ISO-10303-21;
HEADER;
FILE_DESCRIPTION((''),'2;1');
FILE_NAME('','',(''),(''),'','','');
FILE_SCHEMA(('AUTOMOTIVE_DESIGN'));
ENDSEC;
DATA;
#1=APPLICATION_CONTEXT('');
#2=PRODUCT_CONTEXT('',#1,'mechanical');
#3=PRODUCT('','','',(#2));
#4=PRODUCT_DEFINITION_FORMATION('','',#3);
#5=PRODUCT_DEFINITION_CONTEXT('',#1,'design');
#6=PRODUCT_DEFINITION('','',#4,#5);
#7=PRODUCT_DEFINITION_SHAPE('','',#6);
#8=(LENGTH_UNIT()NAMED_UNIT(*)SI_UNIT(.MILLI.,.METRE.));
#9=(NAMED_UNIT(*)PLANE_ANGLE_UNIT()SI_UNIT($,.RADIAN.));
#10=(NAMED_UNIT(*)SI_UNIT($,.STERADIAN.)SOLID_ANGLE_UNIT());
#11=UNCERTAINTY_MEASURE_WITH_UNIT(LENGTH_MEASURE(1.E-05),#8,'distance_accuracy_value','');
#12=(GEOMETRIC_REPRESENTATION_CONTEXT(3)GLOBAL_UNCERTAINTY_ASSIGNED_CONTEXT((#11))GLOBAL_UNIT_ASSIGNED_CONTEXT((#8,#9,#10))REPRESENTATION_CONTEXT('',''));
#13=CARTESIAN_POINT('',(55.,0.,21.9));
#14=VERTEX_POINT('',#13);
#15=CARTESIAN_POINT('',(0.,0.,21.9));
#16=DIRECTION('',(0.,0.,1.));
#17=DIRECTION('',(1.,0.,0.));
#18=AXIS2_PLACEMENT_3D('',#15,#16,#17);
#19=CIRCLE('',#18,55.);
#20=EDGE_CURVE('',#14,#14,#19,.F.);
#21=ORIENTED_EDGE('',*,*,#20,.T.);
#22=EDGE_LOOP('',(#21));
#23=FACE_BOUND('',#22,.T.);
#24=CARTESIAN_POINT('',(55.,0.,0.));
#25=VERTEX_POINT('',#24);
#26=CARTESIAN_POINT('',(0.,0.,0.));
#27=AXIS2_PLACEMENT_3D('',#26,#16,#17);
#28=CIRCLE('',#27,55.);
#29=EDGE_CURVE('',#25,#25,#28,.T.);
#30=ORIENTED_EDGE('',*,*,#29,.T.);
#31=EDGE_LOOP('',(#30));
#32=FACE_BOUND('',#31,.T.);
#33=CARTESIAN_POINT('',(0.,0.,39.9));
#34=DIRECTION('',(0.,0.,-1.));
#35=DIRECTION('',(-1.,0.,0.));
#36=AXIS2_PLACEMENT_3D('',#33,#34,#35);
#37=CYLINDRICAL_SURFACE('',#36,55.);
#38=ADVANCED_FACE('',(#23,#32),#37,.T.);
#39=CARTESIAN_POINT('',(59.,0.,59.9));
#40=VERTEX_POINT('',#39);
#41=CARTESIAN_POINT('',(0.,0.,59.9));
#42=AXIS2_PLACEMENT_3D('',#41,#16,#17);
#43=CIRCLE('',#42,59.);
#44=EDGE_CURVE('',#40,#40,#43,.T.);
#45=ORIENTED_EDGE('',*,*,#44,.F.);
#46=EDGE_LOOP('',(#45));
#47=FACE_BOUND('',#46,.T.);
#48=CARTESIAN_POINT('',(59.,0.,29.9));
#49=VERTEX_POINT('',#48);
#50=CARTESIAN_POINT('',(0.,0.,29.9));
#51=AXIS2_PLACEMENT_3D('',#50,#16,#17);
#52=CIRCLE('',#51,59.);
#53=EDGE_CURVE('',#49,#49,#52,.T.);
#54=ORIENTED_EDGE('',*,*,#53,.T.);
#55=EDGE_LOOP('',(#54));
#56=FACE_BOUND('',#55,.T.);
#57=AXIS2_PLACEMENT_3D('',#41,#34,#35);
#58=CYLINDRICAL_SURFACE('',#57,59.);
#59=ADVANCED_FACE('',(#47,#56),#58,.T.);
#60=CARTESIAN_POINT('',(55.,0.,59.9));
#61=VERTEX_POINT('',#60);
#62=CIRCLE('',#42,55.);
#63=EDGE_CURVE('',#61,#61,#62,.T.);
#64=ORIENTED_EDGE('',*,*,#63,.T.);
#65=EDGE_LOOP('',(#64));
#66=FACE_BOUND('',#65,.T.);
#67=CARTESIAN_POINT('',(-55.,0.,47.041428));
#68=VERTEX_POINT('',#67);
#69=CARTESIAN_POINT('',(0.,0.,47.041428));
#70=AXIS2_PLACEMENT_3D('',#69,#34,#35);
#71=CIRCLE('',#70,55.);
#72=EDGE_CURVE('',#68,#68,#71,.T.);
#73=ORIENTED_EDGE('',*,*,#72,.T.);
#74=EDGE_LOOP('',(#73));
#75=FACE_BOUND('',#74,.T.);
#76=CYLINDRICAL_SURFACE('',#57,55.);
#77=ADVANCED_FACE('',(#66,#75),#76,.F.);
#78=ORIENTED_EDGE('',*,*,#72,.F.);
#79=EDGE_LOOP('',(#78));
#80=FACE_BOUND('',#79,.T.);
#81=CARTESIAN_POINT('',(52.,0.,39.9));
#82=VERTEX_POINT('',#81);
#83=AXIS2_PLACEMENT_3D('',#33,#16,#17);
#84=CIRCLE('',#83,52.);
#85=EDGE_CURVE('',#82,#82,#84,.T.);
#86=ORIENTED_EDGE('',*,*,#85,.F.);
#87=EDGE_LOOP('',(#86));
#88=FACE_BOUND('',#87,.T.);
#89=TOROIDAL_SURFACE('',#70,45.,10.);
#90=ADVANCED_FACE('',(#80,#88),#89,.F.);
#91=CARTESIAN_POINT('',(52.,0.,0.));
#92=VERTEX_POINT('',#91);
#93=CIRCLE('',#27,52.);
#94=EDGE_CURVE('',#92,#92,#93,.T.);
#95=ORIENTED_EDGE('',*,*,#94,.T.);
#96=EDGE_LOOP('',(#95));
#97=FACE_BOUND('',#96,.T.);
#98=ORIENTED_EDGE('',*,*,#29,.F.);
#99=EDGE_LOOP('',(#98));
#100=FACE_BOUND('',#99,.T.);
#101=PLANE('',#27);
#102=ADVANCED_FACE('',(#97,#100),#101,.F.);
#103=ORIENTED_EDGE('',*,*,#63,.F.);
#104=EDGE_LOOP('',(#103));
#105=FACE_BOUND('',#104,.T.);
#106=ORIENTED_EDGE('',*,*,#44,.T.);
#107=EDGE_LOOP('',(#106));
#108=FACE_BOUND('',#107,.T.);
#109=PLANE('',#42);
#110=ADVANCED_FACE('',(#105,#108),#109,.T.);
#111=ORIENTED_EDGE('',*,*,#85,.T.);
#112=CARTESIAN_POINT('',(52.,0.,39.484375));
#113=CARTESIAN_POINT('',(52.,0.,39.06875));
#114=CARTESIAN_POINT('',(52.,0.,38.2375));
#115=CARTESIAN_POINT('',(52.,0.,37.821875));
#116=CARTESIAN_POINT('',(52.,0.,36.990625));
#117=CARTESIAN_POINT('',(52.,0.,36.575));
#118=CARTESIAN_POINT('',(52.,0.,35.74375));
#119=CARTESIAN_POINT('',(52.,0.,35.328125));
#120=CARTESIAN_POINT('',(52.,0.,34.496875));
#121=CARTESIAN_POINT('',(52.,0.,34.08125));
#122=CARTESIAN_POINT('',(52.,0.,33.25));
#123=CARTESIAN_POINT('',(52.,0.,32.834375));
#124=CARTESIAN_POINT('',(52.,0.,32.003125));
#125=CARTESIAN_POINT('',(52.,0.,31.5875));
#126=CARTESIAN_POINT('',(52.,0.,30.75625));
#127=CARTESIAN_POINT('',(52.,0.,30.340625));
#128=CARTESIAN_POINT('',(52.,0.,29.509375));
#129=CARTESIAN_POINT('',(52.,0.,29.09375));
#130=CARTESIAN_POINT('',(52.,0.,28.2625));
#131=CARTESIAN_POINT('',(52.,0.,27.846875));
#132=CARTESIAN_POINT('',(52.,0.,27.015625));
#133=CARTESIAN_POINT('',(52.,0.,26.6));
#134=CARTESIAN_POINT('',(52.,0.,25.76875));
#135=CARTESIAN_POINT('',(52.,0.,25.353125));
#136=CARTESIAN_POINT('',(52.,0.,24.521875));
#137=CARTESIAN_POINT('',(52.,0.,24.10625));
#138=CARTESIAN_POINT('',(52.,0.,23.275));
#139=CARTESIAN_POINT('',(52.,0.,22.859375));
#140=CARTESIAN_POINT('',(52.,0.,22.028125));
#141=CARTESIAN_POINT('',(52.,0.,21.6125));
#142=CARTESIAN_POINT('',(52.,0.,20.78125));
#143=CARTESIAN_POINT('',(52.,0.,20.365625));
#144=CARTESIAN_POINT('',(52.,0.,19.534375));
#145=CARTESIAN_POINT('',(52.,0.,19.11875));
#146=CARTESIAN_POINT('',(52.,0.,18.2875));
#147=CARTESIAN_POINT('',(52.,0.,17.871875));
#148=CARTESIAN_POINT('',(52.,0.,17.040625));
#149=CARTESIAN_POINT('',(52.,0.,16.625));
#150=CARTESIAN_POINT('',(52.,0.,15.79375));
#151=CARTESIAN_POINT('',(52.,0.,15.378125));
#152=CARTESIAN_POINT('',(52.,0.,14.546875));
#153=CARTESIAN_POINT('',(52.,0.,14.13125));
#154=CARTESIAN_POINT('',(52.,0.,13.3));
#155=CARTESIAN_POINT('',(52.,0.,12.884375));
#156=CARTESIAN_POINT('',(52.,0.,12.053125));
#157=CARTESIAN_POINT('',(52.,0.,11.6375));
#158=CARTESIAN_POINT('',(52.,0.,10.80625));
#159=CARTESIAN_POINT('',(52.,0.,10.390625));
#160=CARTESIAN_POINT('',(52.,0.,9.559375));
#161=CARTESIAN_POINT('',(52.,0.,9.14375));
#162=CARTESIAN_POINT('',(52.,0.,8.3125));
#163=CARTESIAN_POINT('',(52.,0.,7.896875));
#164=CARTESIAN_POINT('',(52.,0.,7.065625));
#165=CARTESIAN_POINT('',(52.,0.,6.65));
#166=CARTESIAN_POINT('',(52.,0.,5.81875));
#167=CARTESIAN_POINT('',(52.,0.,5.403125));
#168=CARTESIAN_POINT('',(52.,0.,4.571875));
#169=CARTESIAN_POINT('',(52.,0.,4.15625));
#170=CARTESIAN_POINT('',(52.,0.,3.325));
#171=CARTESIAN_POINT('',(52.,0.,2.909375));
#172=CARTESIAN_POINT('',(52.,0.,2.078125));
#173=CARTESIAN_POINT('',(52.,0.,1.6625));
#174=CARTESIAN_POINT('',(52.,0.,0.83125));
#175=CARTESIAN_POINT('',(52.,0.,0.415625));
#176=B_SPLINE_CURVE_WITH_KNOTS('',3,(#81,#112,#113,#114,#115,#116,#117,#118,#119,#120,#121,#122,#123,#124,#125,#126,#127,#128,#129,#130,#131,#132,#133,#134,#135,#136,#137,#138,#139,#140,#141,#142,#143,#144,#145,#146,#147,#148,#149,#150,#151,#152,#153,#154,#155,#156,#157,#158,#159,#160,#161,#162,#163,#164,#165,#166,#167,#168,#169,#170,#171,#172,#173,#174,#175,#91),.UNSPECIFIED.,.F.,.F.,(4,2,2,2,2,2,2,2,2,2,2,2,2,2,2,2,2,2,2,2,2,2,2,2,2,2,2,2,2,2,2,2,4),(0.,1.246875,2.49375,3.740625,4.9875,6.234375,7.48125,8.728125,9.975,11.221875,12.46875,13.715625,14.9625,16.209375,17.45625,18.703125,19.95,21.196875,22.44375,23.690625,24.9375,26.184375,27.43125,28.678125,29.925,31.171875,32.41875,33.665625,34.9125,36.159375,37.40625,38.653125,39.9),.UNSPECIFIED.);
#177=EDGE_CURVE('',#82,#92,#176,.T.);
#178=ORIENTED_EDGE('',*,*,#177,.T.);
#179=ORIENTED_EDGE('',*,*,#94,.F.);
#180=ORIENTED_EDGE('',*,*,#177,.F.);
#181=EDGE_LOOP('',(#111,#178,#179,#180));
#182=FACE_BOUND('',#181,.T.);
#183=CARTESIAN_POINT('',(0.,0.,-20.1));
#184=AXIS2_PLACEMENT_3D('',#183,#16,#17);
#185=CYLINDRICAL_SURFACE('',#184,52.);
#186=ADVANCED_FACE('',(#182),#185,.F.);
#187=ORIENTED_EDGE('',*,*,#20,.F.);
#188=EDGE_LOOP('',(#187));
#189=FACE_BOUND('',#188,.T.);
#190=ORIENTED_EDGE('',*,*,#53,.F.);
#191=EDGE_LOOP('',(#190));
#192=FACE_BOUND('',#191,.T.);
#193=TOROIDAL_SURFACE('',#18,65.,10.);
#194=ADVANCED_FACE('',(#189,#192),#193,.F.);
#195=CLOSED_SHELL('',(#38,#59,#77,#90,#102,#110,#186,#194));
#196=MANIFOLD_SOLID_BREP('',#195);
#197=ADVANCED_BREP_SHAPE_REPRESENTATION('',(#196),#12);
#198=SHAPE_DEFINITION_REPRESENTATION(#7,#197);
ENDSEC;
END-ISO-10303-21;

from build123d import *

# Parameters (mm, degrees)
SKETCH1_R              = 55
SKETCH1_R_2            = 3
BOSS_EXTRUDE1_DEPTH    = 39.9
SKETCH2_R              = 52
CUT_EXTRUDE1_DEPTH     = 60
CUT_EXTRUDE2_START     = -39.9
CUT_EXTRUDE2_OUTLINE_R = 3
CUT_EXTRUDE2_DEPTH     = 39.9
EXTRUDE_THIN1_START    = -10
SKETCH4_R              = 59
SKETCH4_R_2            = 55
EXTRUDE_THIN1_DEPTH    = 30
FILLET1_R              = 10
FILLET2_R              = 10


# Read off the part's stored shape, not the designer's step: Cut-Extrude2
with BuildPart() as part:
    # Sketch1 → Boss-Extrude1 (new body)
    with BuildSketch(Plane.XY):
        Circle(SKETCH1_R)
        Circle(SKETCH1_R_2, mode=Mode.SUBTRACT)
    extrude(amount=BOSS_EXTRUDE1_DEPTH)

    # Sketch2 → Cut-Extrude1 (cut)
    with BuildSketch(Plane.XY.offset(39.9)):
        Circle(SKETCH2_R)
        with BuildLine():
            Line((-41.361950208, 16.620711788), (-41.361950208, -16.620711788))
            ThreePointArc((-41.361950208, -16.620711788), (0, -44.576439802), (41.361950208, -16.620711788))
            Line((41.361950208, -16.620711788), (41.361950208, 16.620711788))
            ThreePointArc((41.361950208, 16.620711788), (0, 44.576439802), (-41.361950208, 16.620711788))
        make_face(mode=Mode.SUBTRACT)
    extrude(amount=-CUT_EXTRUDE1_DEPTH, mode=Mode.SUBTRACT)


with BuildPart() as cut_extrude1_piece_1:
    # of the separate pieces the step leaves, piece 1, a body of its own (cut_extrude1_pieces)
    add(part.part.solids().sort_by_distance((41.361950208, -16.620711788, 0))[0])

    # Cut-Extrude2 outline → Cut-Extrude2 (cut)
    with BuildSketch(Plane.XY.offset(39.9).offset(CUT_EXTRUDE2_START)):
        with BuildLine():
            Line((41.361950208, -16.620711788), (41.361950208, 16.620711788))
            ThreePointArc((41.361950208, 16.620711788), (0, 44.576439802), (-41.361950208, 16.620711788))
            Line((-41.361950208, 16.620711788), (-41.361950208, -16.620711788))
            ThreePointArc((-41.361950208, -16.620711788), (0, -44.576439802), (41.361950208, -16.620711788))
        make_face()
        Circle(CUT_EXTRUDE2_OUTLINE_R, mode=Mode.SUBTRACT)
    extrude(amount=CUT_EXTRUDE2_DEPTH, mode=Mode.SUBTRACT)


with BuildPart() as cut_extrude1_piece_2:
    # of the separate pieces the step leaves, piece 2, a body of its own (cut_extrude1_pieces)
    add(part.part.solids().sort_by_distance((55, 0, 0))[0])

    # Sketch4 → Extrude-Thin1 (add)
    with BuildSketch(Plane.XY.offset(39.9).offset(EXTRUDE_THIN1_START)):
        Circle(SKETCH4_R)
        Circle(SKETCH4_R_2, mode=Mode.SUBTRACT)
    extrude(amount=EXTRUDE_THIN1_DEPTH)

    # Fillet1
    # the kernel refuses this fillet: 10 mm, written as the material it adds along each edge
    with BuildSketch(Plane(origin=(0, 0, 29.9), x_dir=(1, 0, 0), z_dir=(0, -1, 0))) as fillet1_piece_1:
        with BuildLine():
            CenterArc((65, -8), FILLET1_R, 126.869897646, 53.130102354)
            Line((59, 0), (58.88, 0.16))
            ThreePointArc((58.88, 0.16), (57, 0.2), (55, 0.2))
            Line((55, 0.2), (54.8, 0))
            Line((54.8, 0), (54.8, -8))
            Line((54.8, -8), (55, -8))
        make_face()
    revolve(axis=Axis((0, 0, 29.9), (0, 0, 1)))

    # Fillet2
    # the kernel refuses this fillet: 10 mm, written as the material it adds along each edge
    with BuildSketch(Plane(origin=(0, 0, 39.9), x_dir=(1, 0, 0), z_dir=(0, -1, 0))) as fillet2_piece_1:
        with BuildLine():
            CenterArc((45, 7.141428429), FILLET2_R, 314.427004001, 45.572995999)
            Line((52, 0), (52.14, -0.142828569))
            ThreePointArc((52.14, -0.142828569), (53.5, -0.2), (55, -0.2))
            Line((55, -0.2), (55.2, 0))
            Line((55.2, 0), (55.2, 7.141428429))
            Line((55.2, 7.141428429), (55, 7.141428429))
        make_face()
    revolve(axis=Axis((0, 0, 39.9), (0, 0, 1)))


solid = cut_extrude1_piece_2.part
